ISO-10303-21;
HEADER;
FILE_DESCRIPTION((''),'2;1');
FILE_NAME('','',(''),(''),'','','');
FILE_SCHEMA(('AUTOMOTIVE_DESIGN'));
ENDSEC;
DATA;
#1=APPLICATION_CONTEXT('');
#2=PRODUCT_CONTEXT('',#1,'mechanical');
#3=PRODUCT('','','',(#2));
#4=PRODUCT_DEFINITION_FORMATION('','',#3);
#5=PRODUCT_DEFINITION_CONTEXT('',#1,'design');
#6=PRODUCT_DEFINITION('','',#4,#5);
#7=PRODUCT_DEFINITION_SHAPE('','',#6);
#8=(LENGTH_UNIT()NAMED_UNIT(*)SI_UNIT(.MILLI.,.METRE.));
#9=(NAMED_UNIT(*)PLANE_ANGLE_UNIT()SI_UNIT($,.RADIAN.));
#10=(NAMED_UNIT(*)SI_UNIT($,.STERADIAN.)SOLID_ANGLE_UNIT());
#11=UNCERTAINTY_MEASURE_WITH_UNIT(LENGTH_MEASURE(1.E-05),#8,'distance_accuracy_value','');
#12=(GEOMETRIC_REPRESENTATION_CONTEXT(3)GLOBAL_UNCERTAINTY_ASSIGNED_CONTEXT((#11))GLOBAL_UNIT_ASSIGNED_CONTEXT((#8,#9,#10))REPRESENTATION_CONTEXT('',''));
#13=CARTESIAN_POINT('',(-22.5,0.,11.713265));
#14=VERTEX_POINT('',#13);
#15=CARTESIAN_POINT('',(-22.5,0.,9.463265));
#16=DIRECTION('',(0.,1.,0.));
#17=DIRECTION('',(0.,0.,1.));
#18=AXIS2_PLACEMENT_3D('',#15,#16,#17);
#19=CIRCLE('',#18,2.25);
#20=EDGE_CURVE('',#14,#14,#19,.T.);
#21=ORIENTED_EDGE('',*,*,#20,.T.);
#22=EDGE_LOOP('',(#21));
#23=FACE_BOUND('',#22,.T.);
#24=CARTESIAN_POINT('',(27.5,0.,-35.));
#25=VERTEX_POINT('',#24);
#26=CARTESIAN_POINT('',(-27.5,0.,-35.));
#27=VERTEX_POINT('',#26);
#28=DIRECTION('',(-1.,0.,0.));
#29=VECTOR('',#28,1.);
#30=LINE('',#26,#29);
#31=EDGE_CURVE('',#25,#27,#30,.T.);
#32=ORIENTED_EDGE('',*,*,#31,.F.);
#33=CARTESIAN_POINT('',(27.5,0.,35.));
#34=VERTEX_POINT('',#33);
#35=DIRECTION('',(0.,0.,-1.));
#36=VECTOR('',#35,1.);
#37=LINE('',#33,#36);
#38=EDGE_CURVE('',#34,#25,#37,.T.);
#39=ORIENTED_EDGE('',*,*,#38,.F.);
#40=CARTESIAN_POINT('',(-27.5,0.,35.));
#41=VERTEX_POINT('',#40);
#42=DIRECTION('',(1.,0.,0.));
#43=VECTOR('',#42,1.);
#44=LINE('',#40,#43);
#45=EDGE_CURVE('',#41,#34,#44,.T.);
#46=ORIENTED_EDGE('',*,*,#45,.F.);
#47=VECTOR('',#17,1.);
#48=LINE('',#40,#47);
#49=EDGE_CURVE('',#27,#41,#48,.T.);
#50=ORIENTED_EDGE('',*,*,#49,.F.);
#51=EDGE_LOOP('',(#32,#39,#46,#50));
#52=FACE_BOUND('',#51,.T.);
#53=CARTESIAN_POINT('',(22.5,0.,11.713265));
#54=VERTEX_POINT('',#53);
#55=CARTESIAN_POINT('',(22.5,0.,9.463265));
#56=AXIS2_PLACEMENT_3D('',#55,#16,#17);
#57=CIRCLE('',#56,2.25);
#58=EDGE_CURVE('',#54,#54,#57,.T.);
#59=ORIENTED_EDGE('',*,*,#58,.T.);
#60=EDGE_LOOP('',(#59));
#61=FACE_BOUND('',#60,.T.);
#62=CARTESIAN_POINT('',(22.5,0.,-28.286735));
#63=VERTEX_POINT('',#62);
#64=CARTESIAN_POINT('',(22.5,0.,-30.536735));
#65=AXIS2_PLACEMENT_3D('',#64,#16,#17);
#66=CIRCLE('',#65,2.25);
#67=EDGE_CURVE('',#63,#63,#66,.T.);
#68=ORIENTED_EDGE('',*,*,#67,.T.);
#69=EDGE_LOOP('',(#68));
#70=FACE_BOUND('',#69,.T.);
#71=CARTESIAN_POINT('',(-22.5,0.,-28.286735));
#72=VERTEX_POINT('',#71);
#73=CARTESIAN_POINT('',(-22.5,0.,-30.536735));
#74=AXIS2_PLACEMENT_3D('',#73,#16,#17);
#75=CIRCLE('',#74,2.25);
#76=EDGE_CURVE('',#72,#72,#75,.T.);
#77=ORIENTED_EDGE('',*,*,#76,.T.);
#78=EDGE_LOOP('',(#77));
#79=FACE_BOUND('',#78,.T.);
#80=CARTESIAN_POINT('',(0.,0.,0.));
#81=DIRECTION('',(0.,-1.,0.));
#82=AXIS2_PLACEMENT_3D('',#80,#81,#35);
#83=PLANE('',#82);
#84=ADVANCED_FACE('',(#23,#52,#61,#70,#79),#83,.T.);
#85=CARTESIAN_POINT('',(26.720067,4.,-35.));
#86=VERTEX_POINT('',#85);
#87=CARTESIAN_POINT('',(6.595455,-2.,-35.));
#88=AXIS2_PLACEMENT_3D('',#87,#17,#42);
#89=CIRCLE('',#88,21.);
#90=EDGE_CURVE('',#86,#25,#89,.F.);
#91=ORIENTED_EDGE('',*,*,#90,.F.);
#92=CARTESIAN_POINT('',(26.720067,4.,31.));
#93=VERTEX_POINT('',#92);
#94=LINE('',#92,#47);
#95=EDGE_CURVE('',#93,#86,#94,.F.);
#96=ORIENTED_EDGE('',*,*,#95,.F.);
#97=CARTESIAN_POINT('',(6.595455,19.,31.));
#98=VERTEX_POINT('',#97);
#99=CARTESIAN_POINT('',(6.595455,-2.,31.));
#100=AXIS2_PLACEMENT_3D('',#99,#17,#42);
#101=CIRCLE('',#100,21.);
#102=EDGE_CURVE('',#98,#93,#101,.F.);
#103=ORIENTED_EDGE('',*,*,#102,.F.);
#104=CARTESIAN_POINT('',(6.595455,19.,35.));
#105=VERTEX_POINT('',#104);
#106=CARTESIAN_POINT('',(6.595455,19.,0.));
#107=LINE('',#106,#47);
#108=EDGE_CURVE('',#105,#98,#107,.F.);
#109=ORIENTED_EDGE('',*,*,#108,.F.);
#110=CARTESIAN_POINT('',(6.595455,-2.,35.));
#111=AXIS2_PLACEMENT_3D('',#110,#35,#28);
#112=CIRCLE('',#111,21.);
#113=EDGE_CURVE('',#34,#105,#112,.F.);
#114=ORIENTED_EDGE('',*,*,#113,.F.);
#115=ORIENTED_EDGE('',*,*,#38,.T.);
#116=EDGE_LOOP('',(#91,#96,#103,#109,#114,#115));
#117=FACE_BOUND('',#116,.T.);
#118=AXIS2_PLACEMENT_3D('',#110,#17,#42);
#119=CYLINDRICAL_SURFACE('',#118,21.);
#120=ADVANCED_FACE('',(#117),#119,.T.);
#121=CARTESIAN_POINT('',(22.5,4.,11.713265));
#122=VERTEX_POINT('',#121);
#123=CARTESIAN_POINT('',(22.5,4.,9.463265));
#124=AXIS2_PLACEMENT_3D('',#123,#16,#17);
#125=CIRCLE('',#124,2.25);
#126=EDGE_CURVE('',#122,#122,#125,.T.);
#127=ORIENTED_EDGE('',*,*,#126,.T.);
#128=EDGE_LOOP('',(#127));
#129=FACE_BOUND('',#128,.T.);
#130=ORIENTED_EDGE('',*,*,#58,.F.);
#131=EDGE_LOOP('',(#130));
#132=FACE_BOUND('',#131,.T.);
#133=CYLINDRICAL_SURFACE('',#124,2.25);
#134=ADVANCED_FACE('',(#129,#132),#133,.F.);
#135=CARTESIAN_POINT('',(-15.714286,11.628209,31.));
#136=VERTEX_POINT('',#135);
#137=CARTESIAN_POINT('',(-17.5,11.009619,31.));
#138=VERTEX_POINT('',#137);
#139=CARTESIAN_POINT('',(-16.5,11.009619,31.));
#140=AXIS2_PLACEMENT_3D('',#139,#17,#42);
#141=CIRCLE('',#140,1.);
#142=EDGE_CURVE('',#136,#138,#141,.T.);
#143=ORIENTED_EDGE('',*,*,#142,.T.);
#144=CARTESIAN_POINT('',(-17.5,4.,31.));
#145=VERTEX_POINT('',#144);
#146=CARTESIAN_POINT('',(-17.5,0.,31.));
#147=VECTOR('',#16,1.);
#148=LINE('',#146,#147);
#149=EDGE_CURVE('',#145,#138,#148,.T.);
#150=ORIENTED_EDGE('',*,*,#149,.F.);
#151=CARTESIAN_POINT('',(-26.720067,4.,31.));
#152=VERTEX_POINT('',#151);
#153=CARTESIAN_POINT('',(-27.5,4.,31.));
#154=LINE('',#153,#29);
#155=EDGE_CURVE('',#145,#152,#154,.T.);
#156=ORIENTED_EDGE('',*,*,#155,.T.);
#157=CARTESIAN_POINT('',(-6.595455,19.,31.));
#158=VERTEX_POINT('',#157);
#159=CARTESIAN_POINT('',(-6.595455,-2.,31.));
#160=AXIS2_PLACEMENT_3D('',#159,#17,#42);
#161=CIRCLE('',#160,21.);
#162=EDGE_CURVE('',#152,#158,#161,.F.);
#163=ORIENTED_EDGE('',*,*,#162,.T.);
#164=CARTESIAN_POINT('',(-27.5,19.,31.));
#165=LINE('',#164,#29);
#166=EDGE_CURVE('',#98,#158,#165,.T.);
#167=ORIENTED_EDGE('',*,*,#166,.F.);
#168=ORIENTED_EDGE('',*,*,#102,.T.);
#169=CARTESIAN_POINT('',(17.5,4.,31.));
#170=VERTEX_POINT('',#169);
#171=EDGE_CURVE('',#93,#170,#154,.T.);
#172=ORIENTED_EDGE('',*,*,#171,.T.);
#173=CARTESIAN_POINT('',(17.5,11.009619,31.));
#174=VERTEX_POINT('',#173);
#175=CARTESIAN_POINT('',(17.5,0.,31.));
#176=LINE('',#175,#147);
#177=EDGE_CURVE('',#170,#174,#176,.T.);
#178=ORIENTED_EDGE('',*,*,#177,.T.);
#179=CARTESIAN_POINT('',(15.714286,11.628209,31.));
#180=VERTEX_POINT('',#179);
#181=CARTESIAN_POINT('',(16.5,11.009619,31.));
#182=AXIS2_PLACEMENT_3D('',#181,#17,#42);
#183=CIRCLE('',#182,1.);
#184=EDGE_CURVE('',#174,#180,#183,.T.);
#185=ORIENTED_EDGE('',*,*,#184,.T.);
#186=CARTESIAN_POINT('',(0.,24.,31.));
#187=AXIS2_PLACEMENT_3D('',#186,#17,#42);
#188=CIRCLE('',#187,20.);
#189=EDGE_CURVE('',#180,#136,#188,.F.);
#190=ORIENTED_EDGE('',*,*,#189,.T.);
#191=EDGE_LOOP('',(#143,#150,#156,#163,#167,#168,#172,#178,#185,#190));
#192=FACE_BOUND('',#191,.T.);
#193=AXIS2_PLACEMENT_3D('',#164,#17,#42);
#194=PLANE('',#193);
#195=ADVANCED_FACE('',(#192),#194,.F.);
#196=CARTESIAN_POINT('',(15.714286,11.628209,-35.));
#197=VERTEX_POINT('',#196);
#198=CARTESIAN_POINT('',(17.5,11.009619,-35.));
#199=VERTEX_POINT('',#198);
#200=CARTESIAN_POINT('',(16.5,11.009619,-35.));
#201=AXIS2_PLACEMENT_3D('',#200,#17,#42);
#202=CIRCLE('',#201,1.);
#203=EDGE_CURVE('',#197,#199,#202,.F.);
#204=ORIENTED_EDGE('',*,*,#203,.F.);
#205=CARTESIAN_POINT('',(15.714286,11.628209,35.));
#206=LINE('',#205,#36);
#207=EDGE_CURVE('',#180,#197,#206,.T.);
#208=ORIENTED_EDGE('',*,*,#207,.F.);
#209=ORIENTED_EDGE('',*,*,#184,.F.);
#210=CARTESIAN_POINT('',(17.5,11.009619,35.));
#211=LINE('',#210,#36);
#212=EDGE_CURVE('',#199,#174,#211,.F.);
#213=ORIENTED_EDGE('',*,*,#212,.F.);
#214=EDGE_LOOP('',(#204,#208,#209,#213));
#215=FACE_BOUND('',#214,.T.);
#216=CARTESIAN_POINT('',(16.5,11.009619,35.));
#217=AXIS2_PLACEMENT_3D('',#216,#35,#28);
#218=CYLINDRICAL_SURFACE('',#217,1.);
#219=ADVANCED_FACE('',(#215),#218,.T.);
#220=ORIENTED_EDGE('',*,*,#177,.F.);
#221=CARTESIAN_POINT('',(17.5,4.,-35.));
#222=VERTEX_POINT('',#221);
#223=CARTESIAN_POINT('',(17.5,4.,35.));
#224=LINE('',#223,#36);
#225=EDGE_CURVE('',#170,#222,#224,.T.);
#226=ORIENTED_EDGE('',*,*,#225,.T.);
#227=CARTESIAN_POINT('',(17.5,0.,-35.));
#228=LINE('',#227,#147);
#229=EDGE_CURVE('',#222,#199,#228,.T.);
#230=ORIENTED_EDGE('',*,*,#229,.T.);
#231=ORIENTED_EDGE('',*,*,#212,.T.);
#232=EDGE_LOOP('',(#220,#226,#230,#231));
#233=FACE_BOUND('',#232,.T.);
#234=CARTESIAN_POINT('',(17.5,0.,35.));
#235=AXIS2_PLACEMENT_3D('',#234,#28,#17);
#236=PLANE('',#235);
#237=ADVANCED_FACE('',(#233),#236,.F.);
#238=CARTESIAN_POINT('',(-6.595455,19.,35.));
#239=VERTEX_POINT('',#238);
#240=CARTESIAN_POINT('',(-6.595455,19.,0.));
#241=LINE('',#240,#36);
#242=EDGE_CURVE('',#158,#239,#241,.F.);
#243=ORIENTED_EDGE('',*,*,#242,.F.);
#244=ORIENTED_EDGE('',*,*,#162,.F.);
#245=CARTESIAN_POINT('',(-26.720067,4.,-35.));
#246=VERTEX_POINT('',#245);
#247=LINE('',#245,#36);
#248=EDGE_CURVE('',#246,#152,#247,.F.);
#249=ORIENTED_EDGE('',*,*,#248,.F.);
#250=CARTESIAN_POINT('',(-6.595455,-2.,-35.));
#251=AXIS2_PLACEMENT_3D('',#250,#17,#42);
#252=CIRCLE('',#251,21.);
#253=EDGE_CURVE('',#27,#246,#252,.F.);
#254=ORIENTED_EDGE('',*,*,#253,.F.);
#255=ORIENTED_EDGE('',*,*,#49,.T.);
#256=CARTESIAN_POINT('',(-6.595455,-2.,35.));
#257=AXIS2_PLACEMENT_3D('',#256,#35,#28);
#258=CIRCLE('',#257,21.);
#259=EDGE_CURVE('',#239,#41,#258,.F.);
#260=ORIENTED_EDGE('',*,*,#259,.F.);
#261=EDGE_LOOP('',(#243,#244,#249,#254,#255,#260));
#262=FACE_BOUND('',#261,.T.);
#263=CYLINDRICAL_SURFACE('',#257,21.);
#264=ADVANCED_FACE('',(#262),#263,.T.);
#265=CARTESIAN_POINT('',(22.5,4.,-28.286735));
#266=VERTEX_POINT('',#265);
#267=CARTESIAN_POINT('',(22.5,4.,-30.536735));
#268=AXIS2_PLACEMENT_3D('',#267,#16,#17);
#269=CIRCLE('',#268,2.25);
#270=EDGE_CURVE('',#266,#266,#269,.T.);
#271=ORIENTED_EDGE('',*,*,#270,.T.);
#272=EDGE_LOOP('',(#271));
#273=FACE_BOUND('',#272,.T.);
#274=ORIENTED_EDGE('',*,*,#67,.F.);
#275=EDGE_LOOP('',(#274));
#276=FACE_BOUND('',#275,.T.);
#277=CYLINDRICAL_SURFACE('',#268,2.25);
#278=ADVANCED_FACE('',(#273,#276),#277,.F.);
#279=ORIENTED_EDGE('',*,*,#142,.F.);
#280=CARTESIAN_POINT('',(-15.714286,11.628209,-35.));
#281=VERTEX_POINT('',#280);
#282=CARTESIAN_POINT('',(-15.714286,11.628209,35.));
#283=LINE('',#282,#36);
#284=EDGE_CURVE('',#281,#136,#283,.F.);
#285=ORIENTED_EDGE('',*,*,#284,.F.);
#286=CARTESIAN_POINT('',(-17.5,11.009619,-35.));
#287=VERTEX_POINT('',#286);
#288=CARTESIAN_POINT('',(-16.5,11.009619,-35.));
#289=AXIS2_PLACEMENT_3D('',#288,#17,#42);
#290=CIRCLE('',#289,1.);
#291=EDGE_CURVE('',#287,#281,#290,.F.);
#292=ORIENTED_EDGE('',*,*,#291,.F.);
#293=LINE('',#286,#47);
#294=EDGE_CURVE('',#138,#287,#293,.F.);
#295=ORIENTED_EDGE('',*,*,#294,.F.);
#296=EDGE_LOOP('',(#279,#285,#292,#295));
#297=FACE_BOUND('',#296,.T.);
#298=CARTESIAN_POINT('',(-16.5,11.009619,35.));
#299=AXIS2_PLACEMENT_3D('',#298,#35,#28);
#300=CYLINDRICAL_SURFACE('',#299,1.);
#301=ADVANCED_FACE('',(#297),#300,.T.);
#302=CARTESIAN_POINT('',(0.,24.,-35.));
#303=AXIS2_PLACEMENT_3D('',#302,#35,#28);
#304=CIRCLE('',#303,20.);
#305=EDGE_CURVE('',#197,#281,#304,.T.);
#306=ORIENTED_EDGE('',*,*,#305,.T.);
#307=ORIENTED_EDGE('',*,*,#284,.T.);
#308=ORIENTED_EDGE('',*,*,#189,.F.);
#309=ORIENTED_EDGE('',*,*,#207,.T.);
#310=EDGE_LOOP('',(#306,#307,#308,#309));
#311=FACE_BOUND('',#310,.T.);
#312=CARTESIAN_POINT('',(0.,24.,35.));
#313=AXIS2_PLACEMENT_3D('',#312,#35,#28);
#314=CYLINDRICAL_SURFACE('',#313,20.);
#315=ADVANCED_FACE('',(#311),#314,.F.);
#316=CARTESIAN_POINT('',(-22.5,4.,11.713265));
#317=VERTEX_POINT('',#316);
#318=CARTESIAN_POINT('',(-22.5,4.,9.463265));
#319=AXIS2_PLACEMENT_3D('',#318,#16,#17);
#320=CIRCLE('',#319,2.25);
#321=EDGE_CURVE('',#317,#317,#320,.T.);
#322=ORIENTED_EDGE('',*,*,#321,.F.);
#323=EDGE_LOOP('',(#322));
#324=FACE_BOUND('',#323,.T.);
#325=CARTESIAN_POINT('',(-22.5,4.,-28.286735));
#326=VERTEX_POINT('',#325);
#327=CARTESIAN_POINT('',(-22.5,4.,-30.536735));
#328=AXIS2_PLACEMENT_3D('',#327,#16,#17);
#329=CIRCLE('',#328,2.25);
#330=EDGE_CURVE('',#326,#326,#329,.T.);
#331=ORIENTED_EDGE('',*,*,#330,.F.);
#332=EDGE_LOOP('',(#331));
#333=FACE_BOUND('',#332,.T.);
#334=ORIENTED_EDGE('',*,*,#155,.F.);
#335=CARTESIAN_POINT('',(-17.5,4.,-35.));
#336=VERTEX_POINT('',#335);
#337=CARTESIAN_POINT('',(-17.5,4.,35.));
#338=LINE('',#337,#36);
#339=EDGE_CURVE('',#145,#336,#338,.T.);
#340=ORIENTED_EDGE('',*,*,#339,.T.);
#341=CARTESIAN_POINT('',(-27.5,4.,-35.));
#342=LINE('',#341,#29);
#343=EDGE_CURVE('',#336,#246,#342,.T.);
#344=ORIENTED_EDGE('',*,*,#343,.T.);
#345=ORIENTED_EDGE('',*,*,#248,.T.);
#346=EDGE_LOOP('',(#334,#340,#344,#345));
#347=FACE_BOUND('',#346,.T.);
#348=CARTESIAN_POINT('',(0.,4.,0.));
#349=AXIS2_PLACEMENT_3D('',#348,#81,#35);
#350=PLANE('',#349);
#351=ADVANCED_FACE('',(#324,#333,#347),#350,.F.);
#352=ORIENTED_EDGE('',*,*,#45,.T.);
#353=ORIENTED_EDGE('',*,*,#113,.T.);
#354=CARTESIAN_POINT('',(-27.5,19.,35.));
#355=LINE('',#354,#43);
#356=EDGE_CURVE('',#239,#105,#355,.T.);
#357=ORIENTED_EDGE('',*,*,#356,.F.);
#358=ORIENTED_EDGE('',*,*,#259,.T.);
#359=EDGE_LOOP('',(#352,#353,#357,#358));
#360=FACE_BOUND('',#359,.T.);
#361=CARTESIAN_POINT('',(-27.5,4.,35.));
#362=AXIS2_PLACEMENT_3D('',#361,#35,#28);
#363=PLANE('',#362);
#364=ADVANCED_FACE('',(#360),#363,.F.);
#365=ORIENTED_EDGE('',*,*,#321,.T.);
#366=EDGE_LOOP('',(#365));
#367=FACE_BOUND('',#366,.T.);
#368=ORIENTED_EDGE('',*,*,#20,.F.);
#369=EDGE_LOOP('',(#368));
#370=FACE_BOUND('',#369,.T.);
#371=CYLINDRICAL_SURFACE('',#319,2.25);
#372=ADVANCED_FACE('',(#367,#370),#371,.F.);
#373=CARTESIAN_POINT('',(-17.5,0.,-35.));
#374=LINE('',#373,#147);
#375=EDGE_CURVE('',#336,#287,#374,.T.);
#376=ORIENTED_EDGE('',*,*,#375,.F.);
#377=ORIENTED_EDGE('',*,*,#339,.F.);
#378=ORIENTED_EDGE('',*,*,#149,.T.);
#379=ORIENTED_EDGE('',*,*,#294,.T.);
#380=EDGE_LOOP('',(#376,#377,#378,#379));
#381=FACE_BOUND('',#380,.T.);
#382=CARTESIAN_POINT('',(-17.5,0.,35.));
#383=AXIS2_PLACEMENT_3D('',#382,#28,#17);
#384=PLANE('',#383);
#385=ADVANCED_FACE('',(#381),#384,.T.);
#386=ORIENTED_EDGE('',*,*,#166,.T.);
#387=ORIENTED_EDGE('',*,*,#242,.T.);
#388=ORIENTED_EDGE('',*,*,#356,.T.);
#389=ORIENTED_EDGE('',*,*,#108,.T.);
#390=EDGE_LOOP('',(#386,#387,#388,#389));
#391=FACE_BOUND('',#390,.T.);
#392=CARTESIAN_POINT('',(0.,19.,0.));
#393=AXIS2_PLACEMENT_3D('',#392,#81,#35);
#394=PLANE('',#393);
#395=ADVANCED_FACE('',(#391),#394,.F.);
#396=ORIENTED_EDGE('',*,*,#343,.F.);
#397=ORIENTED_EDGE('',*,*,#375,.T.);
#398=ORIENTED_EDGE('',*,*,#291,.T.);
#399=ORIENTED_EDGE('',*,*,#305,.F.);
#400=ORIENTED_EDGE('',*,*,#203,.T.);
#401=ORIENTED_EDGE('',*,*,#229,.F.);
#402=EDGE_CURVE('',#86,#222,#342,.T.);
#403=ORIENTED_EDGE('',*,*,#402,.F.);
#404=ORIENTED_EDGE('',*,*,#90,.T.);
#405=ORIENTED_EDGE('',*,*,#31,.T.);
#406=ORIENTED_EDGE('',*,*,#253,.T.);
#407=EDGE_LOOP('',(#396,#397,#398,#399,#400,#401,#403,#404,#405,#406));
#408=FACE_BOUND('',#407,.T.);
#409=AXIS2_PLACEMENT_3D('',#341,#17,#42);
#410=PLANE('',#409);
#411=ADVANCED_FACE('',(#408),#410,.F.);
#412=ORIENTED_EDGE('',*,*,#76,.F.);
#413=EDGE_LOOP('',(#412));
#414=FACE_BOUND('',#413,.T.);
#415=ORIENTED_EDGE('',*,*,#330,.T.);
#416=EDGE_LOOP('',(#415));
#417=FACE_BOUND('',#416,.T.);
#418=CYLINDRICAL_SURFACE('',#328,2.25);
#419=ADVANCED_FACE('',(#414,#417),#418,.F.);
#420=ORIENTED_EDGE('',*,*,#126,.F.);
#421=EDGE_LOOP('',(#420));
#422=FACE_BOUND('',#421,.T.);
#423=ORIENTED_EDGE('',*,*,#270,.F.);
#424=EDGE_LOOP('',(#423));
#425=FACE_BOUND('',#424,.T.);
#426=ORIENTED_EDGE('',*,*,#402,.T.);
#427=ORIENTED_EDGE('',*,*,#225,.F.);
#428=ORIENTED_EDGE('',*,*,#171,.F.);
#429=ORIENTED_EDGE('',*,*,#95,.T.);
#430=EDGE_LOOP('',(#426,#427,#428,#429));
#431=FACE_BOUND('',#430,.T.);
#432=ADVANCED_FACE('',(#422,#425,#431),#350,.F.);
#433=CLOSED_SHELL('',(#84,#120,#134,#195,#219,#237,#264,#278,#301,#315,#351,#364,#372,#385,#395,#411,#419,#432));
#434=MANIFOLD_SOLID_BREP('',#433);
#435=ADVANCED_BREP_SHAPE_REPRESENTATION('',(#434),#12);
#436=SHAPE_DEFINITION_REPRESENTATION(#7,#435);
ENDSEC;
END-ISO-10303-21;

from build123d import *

# Parameters (mm, degrees)
SKETCH1_W            = 55
SKETCH1_H            = 70
BOSS_EXTRUDE1_DEPTH  = 4
M4_CLEARANCE_HOLE1_D = 4.5
BOSS_EXTRUDE2_DEPTH  = 70
SKETCH5_W            = 55
SKETCH5_H            = 4
BOSS_EXTRUDE3_DEPTH  = 15
FILLET1_R            = 1
FILLET2_START        = -36
FILLET2_DEPTH        = 71


with BuildPart() as part:
    # Sketch1 → Boss-Extrude1 (new body)
    with BuildSketch(Plane(origin=(0, 0, 0), x_dir=(1, 0, 0), z_dir=(0, 1, 0))):
        Rectangle(SKETCH1_W, SKETCH1_H)
    extrude(amount=BOSS_EXTRUDE1_DEPTH)

    # M4 Clearance Hole1 (through all)
    with Locations(Plane(origin=(0, 4, 0), x_dir=(1, 0, 0), z_dir=(0, 1, 0))):
        with Locations((-22.5, 30.536735359), (22.5, 30.536735359), (-22.5, -9.463264641), (22.5, -9.463264641)):
            Hole(M4_CLEARANCE_HOLE1_D / 2)

    # Sketch4 → Boss-Extrude2 (add, through all)
    with BuildSketch(Plane(origin=(0, 0, -35), x_dir=(-1, 0, 0), z_dir=(0, 0, -1))):
        with BuildLine():
            Line((-17.5, 14.317541634), (-17.5, 4))
            Line((-17.5, 4), (0, 4))
            ThreePointArc((0, 4), (-10.157530032, 6.771402156), (-17.5, 14.317541634))
        make_face()
        with BuildLine():
            ThreePointArc((17.5, 14.317541634), (10.157530032, 6.771402156), (0, 4))
            Line((0, 4), (17.5, 4))
            Line((17.5, 4), (17.5, 14.317541634))
        make_face()
    extrude(amount=-BOSS_EXTRUDE2_DEPTH)

    # Sketch5 → Boss-Extrude3 (add)
    with BuildSketch(Plane(origin=(0, 4, 0), x_dir=(1, 0, 0), z_dir=(0, 1, 0))):
        with Locations((0, -33)):
            Rectangle(SKETCH5_W, SKETCH5_H)
    extrude(amount=BOSS_EXTRUDE3_DEPTH)

    # Fillet1
    fillet1_edges = [part.edges().sort_by_distance(p)[0] for p in [
        (-17.5, 14.317541634, -2),
        (17.5, 14.317541634, -2),
    ]]
    fillet(fillet1_edges, radius=FILLET1_R)

    # Fillet2: read off the stored shape, not the designer's step
    # Fillet2 outline → Fillet2 (cut)
    with BuildSketch(Plane.XY.offset(FILLET2_START)):
        with BuildLine():
            ThreePointArc((-27.5, 0), (-20.719901931, 13.540270268), (-6.59545504, 19))
            Line((-6.59545504, 19), (-27.5, 19))
            Line((-27.5, 19), (-27.5, 0))
        make_face()
        with BuildLine():
            ThreePointArc((6.59545504, 19), (20.719901931, 13.540270268), (27.5, 0))
            Line((27.5, 0), (27.5, 19))
            Line((27.5, 19), (6.59545504, 19))
        make_face()
    extrude(amount=FILLET2_DEPTH, mode=Mode.SUBTRACT)


solid = part.part
